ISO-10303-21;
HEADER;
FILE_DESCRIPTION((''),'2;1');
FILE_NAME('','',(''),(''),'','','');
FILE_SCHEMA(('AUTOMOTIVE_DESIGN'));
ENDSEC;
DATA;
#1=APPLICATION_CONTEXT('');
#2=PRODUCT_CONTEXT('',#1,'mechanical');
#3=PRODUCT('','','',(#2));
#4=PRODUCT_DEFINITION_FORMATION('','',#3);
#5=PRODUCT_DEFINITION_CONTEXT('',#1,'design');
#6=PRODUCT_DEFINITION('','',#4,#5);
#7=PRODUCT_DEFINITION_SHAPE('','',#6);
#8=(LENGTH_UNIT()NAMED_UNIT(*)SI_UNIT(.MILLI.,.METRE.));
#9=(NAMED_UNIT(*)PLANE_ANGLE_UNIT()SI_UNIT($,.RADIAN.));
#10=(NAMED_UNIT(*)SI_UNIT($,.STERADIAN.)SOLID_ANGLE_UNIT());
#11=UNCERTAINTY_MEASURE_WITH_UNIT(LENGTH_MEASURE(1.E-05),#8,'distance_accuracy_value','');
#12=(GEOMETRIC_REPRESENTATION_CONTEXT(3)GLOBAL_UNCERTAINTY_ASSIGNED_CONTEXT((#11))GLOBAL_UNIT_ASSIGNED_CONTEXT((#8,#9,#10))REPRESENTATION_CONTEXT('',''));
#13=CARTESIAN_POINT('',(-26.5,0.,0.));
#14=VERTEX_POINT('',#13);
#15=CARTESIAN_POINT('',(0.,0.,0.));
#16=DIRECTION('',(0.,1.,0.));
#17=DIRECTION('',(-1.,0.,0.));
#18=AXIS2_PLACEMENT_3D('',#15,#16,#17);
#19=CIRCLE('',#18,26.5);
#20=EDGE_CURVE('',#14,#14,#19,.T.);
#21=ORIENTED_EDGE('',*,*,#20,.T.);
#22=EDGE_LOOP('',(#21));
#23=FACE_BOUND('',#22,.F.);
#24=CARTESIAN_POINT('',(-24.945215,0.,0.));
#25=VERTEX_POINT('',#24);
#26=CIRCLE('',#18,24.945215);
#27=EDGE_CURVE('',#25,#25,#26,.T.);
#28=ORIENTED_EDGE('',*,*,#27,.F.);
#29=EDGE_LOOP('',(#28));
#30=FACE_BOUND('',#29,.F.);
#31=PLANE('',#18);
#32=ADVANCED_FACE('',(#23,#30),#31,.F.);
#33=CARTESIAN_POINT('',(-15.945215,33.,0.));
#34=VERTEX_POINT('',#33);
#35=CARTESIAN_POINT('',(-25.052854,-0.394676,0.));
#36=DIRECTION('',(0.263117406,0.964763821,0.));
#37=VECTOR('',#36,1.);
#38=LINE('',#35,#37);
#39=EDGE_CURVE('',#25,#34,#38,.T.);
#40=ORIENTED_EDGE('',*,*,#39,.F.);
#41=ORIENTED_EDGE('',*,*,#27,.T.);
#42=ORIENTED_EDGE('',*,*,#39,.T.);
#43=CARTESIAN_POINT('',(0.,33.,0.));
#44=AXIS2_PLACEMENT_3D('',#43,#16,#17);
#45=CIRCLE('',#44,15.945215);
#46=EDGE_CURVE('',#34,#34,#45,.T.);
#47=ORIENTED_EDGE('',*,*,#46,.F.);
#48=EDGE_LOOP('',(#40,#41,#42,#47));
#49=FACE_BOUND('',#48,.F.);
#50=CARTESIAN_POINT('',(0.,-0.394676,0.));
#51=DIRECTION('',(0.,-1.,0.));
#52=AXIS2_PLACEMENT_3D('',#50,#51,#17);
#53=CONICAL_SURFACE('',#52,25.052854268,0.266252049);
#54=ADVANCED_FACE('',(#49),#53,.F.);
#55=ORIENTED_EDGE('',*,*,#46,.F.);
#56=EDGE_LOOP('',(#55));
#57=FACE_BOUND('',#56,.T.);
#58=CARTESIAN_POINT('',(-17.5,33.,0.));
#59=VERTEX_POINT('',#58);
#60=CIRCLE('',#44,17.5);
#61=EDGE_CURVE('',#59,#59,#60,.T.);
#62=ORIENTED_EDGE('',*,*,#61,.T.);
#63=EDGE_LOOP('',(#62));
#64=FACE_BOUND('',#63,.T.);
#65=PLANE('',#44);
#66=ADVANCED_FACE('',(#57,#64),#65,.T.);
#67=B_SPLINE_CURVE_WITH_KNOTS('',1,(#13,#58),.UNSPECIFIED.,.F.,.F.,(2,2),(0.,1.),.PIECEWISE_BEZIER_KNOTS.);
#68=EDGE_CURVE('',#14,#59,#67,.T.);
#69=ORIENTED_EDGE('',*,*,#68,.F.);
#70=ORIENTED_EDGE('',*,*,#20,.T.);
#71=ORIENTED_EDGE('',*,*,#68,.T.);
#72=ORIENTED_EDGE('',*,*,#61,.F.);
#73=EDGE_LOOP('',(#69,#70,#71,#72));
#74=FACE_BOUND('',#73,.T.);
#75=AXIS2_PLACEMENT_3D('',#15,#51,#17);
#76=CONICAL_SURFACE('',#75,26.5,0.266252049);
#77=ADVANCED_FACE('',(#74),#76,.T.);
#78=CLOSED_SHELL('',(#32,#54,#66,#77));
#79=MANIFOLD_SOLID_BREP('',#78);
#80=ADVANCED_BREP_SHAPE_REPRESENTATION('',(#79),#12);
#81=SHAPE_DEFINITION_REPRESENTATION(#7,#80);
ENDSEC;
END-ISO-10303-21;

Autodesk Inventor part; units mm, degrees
ref_plane "YZ Plane" through (0, 0, 0) normal (1, 0, 0) x (0, 1, 0)
ref_plane "XY Plane" through (0, 0, 0) normal (0, 0, 1) x (1, 0, 0)
sketch "Szkic6" plane through (0, 0, 0) normal (0, 1, 0) x (-1, 0, 0)
  circle A0 centre (0, 0) radius 26.5
  dimension "d33" = 53
ref_plane "Płaszczyzna konstrukcyjna1" through (0, 33, 0) normal (0, 1, 0) x (-1, 0, 0)
sketch "Szkic7" plane through (0, 33, 0) normal (0, 1, 0) x (-1, 0, 0)
  circle A0 centre (0, 0) radius 17.5
  dimension "d35" = 35
loft "Wyciągnięcie złożone1" add profiles "Szkic6", "Szkic7"
shell "Skorupa1" thickness 1.5 removed faces 2 at (-4.3663, 33, -1.0762) at (-1.8199, 0, -2.5499)
equation "\"d33\" = OD1"
equation "\"d35\" = OD2"
equation "\"d52\" = THK"
equation "\"SzerokośćGięciaPodcięcia\" = Grubość"
equation "\"RozmiarPodcięciaNarożnika\" = 4 * Grubość"
equation "\"PromieńPrzejścia\" = PromieńGięcia"
equation "\"Rozmiar_promienia_Jacobiego\" = PromieńGięcia"
equation "\"Wielk_odstępu\" = Grubość"
equation "\"d2\" = PromieńGięcia"
equation "\"d23\" = PromieńGięcia"
equation "\"OD1\" = 53"
equation "\"OD2\" = 35"
equation "\"L\" = 33"
equation "\"THK\" = 1.5"
equation "\"d34\" = L"
equation "\"Grubość\" = 1.5"
equation "\"PromieńGięcia\" = 3"
properties part number "Redukcja symetryczna Ø53x35x1,5 L=33" material "304"
